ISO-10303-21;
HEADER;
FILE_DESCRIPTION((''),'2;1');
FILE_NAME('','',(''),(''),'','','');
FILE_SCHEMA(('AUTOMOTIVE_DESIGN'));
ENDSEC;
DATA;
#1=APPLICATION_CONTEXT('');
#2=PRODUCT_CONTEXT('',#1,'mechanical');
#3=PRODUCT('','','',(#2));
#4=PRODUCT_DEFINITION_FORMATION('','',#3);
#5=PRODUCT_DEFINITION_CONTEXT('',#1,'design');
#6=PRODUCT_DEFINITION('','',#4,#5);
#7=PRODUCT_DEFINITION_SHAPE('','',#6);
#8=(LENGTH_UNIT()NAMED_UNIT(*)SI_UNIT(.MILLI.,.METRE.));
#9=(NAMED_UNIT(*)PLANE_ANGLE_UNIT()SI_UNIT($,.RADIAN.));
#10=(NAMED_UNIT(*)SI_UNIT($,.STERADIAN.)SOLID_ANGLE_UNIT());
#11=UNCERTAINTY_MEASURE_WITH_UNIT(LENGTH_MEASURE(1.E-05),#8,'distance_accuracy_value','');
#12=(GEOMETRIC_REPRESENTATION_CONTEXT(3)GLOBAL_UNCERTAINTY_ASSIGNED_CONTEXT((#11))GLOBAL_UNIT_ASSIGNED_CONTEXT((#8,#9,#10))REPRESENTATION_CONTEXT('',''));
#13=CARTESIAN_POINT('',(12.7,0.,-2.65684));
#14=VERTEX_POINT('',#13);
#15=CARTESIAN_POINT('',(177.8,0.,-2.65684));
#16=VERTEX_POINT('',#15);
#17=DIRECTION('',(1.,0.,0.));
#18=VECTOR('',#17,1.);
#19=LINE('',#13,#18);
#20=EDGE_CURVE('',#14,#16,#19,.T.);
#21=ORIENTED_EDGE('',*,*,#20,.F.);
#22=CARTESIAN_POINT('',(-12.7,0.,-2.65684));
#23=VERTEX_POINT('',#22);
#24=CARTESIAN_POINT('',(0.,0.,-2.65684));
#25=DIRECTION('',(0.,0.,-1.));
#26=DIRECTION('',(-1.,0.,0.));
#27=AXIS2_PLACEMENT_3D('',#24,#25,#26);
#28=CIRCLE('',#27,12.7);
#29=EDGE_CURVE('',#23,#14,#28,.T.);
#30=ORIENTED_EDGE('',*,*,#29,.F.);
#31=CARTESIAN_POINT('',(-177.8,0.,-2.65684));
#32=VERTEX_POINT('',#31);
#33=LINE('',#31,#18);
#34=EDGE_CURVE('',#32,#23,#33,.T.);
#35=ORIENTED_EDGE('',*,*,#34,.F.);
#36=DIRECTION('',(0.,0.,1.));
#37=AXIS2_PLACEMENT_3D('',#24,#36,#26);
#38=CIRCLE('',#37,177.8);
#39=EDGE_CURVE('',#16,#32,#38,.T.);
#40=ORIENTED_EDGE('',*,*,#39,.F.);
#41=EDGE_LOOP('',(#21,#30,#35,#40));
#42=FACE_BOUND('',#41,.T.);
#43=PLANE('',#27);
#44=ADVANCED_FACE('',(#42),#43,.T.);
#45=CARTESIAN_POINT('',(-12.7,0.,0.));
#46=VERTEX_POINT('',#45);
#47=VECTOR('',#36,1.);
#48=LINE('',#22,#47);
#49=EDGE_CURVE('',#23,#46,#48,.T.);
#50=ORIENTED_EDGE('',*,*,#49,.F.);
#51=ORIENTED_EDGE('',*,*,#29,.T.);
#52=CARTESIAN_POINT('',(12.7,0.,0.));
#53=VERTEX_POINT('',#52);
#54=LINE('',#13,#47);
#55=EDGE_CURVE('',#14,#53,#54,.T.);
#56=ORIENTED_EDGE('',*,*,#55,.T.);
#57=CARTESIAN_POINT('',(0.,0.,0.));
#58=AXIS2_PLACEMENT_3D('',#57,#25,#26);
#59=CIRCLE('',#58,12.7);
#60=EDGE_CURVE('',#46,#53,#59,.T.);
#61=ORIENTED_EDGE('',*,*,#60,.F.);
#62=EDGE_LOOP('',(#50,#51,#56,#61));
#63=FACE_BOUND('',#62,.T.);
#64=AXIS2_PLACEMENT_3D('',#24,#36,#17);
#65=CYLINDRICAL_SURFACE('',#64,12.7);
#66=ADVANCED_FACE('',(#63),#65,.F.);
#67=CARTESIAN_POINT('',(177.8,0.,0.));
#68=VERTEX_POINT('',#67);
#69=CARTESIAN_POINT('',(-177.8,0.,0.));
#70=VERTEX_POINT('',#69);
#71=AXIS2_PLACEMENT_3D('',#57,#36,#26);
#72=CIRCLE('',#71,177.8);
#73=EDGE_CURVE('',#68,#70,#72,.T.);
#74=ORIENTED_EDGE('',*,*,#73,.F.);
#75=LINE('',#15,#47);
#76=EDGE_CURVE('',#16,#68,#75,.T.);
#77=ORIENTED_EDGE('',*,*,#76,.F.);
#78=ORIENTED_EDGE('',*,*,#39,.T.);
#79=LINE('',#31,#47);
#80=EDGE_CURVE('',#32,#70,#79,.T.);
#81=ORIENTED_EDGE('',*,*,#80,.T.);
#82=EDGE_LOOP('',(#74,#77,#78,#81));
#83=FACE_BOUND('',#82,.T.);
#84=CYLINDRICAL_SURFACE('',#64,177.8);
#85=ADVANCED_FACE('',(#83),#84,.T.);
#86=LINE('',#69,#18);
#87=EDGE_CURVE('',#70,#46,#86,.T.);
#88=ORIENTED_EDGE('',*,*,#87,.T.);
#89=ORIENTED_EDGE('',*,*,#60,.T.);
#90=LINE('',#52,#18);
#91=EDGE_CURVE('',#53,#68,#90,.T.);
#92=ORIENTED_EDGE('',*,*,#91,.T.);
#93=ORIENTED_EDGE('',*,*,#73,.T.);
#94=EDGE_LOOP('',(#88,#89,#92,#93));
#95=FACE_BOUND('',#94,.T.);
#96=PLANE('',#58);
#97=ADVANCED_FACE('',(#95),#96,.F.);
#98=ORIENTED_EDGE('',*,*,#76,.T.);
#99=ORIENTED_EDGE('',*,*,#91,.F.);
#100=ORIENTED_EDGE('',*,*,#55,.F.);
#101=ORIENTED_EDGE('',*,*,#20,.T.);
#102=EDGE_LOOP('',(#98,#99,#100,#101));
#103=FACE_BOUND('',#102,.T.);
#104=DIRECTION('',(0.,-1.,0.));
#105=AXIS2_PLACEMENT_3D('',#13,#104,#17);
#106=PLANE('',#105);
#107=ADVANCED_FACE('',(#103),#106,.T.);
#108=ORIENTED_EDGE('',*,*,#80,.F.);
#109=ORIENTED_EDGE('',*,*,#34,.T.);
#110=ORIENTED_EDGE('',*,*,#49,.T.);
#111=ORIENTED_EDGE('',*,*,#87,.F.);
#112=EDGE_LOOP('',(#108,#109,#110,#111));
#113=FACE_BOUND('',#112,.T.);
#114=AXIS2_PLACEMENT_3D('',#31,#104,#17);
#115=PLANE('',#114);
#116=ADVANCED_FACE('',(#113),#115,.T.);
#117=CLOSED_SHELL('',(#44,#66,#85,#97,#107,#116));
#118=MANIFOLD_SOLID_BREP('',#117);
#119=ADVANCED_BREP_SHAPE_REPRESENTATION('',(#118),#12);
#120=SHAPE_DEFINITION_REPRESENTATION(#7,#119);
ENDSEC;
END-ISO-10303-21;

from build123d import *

# Parameters (mm, degrees)
BASE_FLANGE1_DEPTH = 2.65684


# Sheet-metal steps are written as plain solids
with BuildPart() as part:
    # Sketch1 → Base-Flange1 (new body)
    with BuildSketch(Plane.XY):
        with BuildLine():
            Line((-177.8, 0), (-12.7, 0))
            ThreePointArc((-12.7, 0), (0, 12.7), (12.7, 0))
            Line((12.7, 0), (177.8, 0))
            ThreePointArc((177.8, 0), (125.723585695, 125.723585695), (0, 177.8))
            ThreePointArc((0, 177.8), (-125.723585695, 125.723585695), (-177.8, 0))
        make_face()
    extrude(amount=-BASE_FLANGE1_DEPTH)


solid = part.part
